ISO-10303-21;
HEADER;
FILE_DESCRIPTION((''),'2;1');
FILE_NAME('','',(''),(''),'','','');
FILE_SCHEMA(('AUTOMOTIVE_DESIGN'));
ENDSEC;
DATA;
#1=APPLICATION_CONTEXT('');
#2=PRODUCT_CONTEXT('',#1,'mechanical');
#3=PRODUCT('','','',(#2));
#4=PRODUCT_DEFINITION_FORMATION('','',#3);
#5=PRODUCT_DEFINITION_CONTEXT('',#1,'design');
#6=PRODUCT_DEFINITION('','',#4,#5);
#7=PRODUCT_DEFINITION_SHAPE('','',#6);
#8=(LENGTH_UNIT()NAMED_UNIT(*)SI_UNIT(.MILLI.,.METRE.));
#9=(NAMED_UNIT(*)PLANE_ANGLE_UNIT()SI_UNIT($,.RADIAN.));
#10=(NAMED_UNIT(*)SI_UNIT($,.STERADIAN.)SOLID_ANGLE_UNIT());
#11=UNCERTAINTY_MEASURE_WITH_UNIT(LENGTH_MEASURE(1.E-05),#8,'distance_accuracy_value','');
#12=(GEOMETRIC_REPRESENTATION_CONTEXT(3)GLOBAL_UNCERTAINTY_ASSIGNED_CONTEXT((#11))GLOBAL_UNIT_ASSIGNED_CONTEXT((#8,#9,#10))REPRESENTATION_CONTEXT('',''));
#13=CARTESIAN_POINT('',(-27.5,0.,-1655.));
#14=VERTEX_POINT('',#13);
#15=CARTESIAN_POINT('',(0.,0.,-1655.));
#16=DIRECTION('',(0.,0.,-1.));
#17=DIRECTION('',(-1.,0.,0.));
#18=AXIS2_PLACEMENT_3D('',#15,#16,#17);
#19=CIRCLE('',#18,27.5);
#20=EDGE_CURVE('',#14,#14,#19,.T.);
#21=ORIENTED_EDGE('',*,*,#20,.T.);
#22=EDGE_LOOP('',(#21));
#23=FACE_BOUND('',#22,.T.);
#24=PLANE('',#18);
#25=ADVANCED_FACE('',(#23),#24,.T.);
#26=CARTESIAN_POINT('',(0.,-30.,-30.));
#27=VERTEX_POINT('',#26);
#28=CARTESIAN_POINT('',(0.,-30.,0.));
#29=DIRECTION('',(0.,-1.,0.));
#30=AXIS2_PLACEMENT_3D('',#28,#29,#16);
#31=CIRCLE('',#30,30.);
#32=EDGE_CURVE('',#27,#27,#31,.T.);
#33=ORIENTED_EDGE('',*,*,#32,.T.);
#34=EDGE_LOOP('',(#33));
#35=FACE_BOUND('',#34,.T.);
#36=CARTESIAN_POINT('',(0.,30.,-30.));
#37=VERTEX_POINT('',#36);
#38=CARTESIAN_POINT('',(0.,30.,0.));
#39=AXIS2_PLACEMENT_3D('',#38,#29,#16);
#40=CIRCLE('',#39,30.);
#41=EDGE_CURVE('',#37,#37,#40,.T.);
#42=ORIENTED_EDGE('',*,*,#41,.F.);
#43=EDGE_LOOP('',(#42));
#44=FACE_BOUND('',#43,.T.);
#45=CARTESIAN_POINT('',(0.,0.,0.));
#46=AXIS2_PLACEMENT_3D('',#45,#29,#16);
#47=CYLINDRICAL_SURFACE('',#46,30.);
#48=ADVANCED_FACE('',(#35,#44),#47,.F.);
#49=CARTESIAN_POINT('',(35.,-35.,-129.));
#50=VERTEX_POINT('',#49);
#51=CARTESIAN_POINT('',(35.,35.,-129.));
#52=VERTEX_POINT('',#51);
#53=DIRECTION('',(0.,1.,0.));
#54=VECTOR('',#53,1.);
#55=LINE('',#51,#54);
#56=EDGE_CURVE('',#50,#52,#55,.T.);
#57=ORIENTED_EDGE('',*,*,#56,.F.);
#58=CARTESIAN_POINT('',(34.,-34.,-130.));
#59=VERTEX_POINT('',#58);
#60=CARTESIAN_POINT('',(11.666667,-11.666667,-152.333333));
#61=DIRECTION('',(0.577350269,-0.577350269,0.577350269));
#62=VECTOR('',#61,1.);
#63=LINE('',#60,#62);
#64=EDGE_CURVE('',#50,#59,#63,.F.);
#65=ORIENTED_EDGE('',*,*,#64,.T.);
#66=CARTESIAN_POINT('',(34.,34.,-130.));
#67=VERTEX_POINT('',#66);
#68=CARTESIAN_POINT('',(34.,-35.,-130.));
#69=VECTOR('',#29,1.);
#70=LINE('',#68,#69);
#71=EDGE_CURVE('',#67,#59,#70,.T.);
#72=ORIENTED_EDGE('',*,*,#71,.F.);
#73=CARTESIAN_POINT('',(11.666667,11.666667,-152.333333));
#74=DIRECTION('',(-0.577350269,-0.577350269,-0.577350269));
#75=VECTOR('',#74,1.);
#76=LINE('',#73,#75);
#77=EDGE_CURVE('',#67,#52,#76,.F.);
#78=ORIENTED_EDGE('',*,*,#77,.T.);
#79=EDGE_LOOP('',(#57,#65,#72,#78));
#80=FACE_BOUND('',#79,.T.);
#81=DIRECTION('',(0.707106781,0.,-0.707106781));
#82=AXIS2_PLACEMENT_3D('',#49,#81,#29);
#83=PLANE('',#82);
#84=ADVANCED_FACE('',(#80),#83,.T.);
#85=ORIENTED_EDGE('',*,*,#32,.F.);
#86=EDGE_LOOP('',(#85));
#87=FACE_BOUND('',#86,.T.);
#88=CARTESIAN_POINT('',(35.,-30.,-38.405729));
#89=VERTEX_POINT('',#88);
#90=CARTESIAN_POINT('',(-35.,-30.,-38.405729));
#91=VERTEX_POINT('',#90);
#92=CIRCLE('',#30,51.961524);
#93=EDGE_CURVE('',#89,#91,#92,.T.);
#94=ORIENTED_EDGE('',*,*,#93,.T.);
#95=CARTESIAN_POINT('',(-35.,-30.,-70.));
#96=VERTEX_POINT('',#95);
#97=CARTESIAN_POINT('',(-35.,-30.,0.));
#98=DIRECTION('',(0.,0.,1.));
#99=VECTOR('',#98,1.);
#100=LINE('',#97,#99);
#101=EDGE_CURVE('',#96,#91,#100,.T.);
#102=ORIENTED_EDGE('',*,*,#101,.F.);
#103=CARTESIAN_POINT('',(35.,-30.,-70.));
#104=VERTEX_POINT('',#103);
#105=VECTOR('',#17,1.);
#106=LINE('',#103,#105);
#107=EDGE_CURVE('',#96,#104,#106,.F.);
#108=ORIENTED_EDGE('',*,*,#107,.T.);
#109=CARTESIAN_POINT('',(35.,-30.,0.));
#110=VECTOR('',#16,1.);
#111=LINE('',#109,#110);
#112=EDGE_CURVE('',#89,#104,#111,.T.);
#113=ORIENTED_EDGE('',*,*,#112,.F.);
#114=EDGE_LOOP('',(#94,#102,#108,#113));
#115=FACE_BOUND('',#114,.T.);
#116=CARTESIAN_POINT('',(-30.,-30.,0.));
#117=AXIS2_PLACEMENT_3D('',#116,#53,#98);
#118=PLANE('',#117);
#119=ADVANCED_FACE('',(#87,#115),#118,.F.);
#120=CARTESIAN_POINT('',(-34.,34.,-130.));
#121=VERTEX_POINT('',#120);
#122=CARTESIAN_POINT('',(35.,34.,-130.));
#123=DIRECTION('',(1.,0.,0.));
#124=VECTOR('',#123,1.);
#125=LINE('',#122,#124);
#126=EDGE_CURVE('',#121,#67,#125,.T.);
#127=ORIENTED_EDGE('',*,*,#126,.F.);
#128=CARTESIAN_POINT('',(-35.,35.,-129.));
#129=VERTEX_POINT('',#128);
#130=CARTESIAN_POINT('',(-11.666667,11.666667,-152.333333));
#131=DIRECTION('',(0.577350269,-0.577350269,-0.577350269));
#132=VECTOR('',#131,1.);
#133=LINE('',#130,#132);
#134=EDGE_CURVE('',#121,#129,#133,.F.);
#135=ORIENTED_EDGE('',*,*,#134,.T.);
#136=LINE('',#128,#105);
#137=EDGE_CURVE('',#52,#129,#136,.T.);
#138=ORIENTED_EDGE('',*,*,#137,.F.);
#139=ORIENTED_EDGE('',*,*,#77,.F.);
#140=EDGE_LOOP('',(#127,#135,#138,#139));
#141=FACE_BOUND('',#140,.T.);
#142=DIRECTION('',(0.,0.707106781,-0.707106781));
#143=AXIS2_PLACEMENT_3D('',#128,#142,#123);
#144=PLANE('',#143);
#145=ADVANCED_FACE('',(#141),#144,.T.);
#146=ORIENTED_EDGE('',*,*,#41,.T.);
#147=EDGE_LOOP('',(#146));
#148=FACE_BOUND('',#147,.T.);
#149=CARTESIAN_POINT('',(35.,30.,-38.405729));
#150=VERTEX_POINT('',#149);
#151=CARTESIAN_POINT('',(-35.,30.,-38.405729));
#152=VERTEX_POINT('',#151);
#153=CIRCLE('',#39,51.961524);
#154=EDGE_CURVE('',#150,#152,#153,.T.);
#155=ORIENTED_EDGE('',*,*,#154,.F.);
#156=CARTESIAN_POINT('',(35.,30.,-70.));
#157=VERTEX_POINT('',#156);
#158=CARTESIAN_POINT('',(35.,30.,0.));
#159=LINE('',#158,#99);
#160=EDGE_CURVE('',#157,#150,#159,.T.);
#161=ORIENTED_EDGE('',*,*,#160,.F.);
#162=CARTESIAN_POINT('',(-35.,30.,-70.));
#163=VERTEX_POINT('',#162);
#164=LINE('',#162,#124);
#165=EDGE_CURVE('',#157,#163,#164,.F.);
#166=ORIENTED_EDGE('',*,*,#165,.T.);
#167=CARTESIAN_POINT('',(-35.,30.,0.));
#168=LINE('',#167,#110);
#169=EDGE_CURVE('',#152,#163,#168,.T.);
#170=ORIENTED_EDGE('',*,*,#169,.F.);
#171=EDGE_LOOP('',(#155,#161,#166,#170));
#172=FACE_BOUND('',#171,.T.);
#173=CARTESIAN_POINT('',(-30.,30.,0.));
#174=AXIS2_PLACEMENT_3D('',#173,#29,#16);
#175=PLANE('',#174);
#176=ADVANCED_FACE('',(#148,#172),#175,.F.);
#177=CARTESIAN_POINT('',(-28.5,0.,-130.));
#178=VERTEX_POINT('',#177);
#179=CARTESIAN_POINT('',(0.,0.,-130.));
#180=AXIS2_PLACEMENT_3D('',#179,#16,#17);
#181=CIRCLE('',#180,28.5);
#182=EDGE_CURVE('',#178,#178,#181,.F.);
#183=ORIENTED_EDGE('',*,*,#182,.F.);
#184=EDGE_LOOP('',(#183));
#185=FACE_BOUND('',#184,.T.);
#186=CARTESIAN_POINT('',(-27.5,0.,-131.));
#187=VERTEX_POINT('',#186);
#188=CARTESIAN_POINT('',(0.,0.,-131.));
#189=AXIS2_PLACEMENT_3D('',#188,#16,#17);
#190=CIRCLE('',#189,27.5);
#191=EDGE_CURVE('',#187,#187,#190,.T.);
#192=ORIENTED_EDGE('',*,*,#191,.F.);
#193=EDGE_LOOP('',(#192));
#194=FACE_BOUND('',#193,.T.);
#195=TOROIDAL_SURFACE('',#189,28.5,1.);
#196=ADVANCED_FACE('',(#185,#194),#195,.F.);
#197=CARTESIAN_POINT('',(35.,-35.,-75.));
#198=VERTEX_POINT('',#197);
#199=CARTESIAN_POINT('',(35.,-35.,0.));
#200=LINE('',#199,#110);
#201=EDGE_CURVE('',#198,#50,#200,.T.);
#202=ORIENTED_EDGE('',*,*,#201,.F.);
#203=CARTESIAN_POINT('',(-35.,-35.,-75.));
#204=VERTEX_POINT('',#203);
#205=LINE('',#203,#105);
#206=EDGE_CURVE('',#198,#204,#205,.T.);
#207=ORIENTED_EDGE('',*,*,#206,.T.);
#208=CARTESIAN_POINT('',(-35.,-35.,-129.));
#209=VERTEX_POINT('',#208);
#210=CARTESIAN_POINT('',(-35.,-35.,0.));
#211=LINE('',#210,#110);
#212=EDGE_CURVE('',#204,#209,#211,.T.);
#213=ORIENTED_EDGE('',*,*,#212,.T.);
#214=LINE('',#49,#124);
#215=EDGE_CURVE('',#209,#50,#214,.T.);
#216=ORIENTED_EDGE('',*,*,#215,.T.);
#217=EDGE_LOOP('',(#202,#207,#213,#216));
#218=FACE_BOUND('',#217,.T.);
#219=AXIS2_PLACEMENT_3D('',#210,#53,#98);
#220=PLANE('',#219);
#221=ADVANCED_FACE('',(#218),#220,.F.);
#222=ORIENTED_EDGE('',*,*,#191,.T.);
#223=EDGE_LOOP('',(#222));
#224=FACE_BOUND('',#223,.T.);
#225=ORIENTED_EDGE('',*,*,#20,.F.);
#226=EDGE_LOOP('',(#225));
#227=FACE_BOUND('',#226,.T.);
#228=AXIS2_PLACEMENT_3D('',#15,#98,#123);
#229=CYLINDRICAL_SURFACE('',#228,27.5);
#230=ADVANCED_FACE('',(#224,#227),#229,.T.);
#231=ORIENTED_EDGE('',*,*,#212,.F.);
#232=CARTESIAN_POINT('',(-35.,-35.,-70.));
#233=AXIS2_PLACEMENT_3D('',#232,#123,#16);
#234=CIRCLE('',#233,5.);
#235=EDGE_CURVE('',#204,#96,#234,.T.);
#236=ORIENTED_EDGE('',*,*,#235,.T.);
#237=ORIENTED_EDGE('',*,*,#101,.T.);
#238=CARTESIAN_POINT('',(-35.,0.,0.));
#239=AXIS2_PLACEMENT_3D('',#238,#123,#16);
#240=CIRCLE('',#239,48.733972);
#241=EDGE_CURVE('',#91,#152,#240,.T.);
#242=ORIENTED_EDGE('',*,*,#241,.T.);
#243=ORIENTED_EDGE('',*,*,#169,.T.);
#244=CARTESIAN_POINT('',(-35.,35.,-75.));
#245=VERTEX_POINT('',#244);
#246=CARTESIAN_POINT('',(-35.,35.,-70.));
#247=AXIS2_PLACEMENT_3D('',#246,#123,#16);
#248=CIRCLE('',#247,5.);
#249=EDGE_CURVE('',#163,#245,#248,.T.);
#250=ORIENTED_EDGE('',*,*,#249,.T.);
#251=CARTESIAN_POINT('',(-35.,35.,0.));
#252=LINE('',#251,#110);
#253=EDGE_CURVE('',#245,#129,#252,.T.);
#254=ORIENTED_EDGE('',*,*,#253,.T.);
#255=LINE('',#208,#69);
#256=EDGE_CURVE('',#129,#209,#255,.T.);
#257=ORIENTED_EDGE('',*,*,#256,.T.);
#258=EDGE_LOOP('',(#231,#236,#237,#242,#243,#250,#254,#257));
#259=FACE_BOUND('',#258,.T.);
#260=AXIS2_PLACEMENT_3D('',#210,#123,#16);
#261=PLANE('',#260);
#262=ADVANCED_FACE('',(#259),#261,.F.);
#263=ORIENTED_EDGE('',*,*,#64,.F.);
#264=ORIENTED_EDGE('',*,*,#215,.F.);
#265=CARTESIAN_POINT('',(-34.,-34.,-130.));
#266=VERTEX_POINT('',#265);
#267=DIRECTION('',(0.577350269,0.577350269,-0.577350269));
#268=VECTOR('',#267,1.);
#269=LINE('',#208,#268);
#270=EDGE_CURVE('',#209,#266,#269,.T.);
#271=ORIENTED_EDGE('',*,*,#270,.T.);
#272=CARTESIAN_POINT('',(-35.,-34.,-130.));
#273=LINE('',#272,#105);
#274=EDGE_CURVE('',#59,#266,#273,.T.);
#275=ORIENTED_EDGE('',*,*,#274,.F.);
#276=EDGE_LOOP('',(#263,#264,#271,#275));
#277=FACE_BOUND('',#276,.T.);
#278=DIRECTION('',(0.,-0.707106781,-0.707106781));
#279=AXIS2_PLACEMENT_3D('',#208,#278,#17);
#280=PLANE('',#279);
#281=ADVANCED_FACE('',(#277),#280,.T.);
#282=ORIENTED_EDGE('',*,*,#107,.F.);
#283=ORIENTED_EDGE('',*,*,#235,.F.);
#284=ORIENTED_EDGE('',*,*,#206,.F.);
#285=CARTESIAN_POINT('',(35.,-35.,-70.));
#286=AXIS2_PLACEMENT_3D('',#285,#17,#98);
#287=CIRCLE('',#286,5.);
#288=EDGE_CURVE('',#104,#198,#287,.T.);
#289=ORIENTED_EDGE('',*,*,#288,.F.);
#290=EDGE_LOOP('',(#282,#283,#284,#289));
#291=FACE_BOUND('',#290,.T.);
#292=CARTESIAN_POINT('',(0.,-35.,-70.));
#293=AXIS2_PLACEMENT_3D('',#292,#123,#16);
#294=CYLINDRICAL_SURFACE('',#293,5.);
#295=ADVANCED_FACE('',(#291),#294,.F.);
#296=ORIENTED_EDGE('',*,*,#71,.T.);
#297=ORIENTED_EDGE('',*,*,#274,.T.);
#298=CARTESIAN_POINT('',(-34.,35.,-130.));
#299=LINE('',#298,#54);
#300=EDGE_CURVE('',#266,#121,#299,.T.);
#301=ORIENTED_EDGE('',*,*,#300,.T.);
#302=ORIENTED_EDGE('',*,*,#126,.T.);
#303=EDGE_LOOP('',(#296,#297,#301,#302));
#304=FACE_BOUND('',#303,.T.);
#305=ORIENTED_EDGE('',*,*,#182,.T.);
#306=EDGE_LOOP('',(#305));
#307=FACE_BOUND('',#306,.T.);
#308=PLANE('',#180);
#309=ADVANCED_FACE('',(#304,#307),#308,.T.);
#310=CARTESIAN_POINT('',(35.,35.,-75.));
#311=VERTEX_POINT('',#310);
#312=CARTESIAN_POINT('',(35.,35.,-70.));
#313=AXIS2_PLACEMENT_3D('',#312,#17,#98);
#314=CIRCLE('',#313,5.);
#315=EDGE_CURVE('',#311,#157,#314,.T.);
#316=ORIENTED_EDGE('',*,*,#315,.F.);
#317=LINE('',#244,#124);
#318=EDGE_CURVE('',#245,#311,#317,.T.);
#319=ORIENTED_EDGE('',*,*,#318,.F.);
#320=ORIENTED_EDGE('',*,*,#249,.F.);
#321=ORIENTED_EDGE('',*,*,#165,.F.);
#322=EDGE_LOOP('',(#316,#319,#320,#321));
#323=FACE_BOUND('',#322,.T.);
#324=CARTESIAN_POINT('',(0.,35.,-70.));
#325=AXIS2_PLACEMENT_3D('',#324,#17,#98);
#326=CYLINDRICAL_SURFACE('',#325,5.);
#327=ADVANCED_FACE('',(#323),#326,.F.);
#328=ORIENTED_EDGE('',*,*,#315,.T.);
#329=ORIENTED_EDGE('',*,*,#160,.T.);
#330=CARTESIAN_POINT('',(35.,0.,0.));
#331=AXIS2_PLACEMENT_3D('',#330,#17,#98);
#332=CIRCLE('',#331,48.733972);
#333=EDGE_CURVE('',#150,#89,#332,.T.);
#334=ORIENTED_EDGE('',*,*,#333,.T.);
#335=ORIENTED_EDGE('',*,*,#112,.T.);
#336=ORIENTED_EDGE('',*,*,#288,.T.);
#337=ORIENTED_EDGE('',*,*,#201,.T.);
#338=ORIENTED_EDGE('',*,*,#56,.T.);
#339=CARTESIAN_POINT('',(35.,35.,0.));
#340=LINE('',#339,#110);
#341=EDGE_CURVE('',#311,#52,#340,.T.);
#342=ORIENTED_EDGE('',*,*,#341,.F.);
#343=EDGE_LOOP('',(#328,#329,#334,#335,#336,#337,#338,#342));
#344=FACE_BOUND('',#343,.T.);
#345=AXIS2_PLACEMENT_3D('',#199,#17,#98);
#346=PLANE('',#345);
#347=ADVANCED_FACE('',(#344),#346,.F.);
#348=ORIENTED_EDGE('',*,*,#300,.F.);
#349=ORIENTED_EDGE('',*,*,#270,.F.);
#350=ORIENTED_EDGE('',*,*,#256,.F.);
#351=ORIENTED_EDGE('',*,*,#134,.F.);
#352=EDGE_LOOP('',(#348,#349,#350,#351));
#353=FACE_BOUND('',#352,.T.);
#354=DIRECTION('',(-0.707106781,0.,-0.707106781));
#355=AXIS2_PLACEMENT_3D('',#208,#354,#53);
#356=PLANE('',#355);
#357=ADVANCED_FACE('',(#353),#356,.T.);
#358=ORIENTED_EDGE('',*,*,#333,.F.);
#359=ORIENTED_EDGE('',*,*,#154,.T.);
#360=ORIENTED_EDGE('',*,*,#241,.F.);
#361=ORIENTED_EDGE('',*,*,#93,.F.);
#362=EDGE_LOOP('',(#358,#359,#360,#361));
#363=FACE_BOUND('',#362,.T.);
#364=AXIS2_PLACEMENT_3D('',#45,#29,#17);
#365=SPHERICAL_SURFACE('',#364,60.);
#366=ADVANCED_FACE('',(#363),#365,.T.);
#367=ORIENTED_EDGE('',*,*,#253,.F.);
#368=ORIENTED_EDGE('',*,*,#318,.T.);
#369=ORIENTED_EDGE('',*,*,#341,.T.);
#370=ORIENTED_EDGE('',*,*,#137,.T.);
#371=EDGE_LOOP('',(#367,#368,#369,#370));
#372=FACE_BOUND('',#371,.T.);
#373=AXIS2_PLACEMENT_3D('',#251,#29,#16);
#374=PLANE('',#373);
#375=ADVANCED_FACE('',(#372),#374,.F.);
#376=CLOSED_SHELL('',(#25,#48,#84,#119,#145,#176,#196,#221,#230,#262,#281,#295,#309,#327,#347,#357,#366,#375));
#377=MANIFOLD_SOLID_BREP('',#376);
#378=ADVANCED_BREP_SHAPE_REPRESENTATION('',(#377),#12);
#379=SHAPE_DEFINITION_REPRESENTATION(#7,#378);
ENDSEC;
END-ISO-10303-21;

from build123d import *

# Parameters (mm, degrees)
SKETCH_5_W          = 70
SKETCH_5_H          = 70
EXTRUDE_2_DEPTH     = 130
SKETCH_11_R         = 27.5
EXTRUDE_4_DEPTH     = 1525
SKETCH_12_W         = 103.923048454
SKETCH_12_H         = 8.094806624
SKETCH_12_H_2       = 10.367731853
CUT_EXTRUDE_1_DEPTH = 75
CUT_EXTRUDE_START   = -75
SKETCH_13_R         = 30
CUT_EXTRUDE_2_DEPTH = 75
FILLET_3_R          = 5
FILLET_2_R          = 1
CHAMFER_2_SIZE      = 1


with BuildPart() as part:
    # 草图3 → 旋转1 (revolve)
    with BuildSketch(Plane.XY):
        with BuildLine():
            Line((-30, -30), (-30, 30))
            Line((-30, 30), (-51.961524227, 30))
            ThreePointArc((-51.961524227, 30), (-60, 0), (-51.961524227, -30))
            Line((-51.961524227, -30), (-30, -30))
        make_face()
    revolve(axis=Axis((0, 0, 0), (0, 1, 0)))

    # 草图5 → 凸台-拉伸2 (add)
    with BuildSketch(Plane.XY.offset(-130)):
        Rectangle(SKETCH_5_W, SKETCH_5_H)
    extrude(amount=EXTRUDE_2_DEPTH)

    # 草图11 → 凸台-拉伸4 (add)
    with BuildSketch(Plane(origin=(0, 0, -130), x_dir=(-1, 0, 0), z_dir=(0, 0, -1))):
        Circle(SKETCH_11_R)
    extrude(amount=EXTRUDE_4_DEPTH)

    # 草图12 → 切除-拉伸1 (cut)
    with BuildSketch(Plane.XY):
        with Locations((0, 34.047403312)):
            Rectangle(SKETCH_12_W, SKETCH_12_H)
        with Locations((0, -35.183865927)):
            Rectangle(SKETCH_12_W, SKETCH_12_H_2)
    extrude(amount=-CUT_EXTRUDE_1_DEPTH, mode=Mode.SUBTRACT)

    # 草图13 → 切除-拉伸2 (cut)
    with BuildSketch(Plane.XZ.offset(30).offset(CUT_EXTRUDE_START)):
        with Locations(Location((0, 0, 0), (0, 0, 270))):
            Circle(SKETCH_13_R)
    extrude(amount=CUT_EXTRUDE_2_DEPTH, mode=Mode.SUBTRACT)

    # 圆角3
    fillet_3_edges = [part.edges().sort_by_distance(p)[0] for p in [
        (0, -30, -75),
        (0, 30, -75),
    ]]
    fillet(fillet_3_edges, radius=FILLET_3_R - 0.0001)  # a hair under: the kernel refuses the full size

    # 圆角2
    fillet_2_edges = [part.edges().sort_by_distance(p)[0] for p in [
        (27.5, 0, -130),
    ]]
    fillet(fillet_2_edges, radius=FILLET_2_R)

    # 倒角2
    chamfer_2_edges = [part.edges().sort_by_distance(p)[0] for p in [
        (35, 0, -130),
        (-35, 0, -130),
        (0, 35, -130),
        (0, -35, -130),
    ]]
    chamfer(chamfer_2_edges, length=CHAMFER_2_SIZE)


solid = part.part
